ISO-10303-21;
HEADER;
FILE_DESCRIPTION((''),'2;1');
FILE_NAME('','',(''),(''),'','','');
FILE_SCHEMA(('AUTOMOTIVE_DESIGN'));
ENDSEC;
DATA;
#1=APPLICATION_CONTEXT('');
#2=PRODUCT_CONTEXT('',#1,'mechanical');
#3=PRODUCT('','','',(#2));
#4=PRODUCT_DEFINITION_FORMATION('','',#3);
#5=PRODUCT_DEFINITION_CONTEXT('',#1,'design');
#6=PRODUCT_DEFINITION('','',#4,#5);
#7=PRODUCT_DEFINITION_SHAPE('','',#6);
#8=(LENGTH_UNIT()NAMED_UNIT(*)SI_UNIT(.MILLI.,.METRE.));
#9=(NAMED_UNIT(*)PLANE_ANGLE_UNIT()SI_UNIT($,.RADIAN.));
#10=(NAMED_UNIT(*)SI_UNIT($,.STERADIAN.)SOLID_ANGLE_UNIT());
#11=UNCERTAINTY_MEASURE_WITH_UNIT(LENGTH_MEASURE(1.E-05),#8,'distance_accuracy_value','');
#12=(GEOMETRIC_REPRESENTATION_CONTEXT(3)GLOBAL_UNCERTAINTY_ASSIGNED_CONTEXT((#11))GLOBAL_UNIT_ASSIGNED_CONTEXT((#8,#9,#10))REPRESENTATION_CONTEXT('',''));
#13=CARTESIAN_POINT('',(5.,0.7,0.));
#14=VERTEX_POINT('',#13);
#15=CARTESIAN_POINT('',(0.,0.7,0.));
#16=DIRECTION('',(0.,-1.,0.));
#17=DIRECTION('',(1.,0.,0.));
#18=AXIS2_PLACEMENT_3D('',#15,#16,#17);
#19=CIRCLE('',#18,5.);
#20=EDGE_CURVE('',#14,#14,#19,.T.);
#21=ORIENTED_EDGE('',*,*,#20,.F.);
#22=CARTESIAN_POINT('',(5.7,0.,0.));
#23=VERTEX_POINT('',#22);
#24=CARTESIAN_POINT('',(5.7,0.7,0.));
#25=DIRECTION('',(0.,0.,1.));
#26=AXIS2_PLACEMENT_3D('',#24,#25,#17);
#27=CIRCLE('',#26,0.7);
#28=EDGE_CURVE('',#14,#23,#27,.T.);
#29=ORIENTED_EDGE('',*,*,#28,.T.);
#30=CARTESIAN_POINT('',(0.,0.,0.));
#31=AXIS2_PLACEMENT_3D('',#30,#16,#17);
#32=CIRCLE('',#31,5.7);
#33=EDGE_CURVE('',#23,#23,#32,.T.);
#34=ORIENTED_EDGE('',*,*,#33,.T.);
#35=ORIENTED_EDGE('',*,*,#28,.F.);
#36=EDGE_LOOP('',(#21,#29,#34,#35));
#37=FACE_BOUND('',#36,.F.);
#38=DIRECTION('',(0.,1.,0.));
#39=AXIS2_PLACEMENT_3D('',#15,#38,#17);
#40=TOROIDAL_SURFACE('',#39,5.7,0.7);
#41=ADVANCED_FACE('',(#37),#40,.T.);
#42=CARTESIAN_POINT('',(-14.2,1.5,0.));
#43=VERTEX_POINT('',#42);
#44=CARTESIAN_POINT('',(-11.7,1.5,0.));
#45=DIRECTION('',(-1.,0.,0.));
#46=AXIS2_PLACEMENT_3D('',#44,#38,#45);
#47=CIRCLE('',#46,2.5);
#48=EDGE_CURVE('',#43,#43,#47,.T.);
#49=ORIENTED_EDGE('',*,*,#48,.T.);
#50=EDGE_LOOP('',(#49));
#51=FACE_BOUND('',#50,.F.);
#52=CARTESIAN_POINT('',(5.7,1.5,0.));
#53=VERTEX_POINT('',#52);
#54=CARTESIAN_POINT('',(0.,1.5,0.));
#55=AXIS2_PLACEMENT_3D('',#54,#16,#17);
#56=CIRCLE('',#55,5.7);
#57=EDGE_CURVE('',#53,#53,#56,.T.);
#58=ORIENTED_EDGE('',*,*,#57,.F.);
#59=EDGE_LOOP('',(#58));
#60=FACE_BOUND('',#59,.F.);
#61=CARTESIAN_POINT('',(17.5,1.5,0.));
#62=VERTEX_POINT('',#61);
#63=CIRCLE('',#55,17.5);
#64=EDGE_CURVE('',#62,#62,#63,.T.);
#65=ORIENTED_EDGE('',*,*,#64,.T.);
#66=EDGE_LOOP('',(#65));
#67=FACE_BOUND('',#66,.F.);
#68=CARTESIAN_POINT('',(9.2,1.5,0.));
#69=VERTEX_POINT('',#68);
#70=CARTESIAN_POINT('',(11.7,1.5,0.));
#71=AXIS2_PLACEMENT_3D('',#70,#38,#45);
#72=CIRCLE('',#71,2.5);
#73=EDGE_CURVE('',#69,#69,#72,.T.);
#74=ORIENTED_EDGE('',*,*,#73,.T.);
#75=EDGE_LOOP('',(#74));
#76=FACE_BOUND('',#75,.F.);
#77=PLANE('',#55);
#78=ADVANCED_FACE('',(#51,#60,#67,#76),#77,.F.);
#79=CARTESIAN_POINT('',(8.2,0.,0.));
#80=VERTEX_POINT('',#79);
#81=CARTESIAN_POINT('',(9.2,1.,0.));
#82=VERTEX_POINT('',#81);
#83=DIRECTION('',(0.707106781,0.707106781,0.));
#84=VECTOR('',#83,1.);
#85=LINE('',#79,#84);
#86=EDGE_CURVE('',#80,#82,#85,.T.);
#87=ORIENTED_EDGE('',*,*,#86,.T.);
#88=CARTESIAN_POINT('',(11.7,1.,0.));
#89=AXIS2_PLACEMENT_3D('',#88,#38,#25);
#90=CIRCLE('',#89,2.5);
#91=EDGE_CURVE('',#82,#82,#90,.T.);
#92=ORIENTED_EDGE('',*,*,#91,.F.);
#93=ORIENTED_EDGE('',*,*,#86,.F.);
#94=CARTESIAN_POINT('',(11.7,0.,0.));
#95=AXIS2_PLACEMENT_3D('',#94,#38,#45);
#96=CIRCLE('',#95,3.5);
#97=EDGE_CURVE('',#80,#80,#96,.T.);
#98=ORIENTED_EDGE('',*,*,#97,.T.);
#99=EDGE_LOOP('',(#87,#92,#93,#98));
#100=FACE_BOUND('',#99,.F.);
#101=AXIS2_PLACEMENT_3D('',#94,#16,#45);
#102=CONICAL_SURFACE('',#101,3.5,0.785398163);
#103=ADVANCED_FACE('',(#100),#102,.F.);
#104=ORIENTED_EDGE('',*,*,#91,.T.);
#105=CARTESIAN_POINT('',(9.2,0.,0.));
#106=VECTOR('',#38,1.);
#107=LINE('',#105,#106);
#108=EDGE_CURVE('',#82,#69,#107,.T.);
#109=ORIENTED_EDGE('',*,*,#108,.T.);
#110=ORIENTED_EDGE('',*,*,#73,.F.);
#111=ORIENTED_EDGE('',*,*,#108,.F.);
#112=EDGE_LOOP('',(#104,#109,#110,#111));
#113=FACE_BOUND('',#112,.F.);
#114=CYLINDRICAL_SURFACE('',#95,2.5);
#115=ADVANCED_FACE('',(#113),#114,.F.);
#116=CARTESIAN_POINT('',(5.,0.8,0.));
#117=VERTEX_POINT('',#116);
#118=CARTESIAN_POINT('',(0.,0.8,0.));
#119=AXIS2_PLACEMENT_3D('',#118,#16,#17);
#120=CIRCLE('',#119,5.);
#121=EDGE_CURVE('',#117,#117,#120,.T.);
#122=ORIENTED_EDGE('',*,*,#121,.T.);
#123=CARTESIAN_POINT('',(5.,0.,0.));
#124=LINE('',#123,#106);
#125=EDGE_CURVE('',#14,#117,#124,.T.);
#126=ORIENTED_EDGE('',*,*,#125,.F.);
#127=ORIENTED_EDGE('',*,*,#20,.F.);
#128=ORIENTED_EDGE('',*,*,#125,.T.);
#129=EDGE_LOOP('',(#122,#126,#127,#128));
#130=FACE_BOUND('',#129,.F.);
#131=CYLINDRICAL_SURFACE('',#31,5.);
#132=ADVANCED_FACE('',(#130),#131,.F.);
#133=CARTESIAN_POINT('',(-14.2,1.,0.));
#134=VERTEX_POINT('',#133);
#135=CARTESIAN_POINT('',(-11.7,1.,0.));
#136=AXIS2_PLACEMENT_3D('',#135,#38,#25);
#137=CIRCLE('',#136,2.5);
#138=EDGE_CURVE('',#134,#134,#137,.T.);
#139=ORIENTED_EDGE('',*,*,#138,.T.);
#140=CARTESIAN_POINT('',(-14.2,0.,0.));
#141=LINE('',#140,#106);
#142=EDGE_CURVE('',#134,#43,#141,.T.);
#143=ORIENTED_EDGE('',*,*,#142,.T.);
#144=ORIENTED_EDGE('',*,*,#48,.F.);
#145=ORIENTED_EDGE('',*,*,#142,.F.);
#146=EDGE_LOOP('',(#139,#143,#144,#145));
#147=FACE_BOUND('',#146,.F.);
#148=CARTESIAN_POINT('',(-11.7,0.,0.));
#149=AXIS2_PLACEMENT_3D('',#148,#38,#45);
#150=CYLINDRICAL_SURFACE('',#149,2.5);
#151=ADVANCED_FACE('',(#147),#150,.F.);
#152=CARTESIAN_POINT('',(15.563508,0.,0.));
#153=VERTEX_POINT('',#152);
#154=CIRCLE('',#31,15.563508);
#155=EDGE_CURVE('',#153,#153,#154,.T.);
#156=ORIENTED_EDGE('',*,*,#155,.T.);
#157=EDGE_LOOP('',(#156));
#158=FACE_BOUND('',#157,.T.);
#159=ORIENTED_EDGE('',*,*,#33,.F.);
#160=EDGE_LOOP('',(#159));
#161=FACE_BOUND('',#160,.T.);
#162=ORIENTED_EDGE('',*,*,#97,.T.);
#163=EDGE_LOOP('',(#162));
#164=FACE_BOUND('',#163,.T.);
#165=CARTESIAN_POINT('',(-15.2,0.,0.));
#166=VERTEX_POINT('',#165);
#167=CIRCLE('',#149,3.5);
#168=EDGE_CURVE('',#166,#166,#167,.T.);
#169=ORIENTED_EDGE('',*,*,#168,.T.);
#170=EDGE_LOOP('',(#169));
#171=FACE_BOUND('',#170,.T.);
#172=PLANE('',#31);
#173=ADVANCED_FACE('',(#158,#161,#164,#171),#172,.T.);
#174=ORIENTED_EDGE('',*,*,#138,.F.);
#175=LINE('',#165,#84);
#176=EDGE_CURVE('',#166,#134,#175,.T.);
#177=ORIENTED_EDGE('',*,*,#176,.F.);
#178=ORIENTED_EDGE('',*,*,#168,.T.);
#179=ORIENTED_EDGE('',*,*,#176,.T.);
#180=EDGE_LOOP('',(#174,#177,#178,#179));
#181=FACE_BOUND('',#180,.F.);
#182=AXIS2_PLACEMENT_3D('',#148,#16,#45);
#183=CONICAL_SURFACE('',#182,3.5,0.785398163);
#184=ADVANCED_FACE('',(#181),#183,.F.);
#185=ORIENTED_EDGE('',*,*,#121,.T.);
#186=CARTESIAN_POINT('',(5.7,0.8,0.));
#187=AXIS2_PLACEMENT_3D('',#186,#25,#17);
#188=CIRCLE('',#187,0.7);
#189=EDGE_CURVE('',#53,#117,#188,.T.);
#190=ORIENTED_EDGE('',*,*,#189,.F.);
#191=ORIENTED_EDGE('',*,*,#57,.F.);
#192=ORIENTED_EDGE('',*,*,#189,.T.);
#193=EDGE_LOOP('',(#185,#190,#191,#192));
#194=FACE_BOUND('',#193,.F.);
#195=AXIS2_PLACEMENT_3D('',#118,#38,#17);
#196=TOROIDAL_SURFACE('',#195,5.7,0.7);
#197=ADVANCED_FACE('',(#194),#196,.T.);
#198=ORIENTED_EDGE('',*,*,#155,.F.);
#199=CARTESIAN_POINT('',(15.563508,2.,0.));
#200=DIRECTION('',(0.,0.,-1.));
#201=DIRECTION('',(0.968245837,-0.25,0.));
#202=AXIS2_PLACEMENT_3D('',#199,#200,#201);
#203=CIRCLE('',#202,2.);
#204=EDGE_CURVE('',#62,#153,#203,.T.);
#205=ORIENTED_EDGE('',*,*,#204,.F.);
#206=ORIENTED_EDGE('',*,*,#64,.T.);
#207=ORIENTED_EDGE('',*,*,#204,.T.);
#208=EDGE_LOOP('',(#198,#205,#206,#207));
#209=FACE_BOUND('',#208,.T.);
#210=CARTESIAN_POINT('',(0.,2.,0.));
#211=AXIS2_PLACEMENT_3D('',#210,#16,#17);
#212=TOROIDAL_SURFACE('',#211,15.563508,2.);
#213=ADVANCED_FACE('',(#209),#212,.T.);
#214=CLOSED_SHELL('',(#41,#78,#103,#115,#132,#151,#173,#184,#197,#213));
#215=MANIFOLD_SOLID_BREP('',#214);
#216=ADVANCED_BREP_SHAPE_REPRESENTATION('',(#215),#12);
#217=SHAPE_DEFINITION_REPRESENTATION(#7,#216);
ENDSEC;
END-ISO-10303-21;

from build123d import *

# Parameters (mm, degrees)
F0_R           = 17.5
F0_R_2         = 5
F1_DEPTH       = 1.5
F2_D           = 5
F2_CSINK_D     = 7
F2_CSINK_ANGLE = 90
F4_R           = 0.7


# Not quite as in the source:
# - a fillet or chamfer that OpenCascade refuses, or shapes differently, is made with other operations: its cross-section is extruded or revolved along the edge and cut away or added


with BuildPart() as f1:
    # F0 (on Front) → F1 (new body)
    with BuildSketch(Plane.XZ):
        Circle(F0_R)
        Circle(F0_R_2, mode=Mode.SUBTRACT)
    extrude(amount=-F1_DEPTH)

    # F2 (through all)
    with Locations(Plane.XZ):
        with Locations((-11.7, 0), (11.7, 0)):
            CounterSinkHole(F2_D / 2, F2_CSINK_D / 2, counter_sink_angle=F2_CSINK_ANGLE)

    # F3: fillet of radius 2 on 1 edges, made by hand

    # F3_s1 → F3_t2 (revolve, cut)
    with BuildSketch(Plane.XY):
        with BuildLine():
            ThreePointArc((17.5, 1.5), (16.7882531983, 0.4188611699), (15.5635083269, 0))
            Line((15.5635083269, 0), (17.5, 0))
            Line((17.5, 0), (17.5, 1.5))
        make_face()
    revolve(axis=Axis((0, 0, 0), (0, -1, 0)), mode=Mode.SUBTRACT)

    # F4
    f4_edges = [f1.edges().sort_by_distance(p)[0] for p in [
        (-5, 0, 0),
        (-5, 1.5, 0),
    ]]
    fillet(f4_edges, radius=F4_R)


solid = f1.part
